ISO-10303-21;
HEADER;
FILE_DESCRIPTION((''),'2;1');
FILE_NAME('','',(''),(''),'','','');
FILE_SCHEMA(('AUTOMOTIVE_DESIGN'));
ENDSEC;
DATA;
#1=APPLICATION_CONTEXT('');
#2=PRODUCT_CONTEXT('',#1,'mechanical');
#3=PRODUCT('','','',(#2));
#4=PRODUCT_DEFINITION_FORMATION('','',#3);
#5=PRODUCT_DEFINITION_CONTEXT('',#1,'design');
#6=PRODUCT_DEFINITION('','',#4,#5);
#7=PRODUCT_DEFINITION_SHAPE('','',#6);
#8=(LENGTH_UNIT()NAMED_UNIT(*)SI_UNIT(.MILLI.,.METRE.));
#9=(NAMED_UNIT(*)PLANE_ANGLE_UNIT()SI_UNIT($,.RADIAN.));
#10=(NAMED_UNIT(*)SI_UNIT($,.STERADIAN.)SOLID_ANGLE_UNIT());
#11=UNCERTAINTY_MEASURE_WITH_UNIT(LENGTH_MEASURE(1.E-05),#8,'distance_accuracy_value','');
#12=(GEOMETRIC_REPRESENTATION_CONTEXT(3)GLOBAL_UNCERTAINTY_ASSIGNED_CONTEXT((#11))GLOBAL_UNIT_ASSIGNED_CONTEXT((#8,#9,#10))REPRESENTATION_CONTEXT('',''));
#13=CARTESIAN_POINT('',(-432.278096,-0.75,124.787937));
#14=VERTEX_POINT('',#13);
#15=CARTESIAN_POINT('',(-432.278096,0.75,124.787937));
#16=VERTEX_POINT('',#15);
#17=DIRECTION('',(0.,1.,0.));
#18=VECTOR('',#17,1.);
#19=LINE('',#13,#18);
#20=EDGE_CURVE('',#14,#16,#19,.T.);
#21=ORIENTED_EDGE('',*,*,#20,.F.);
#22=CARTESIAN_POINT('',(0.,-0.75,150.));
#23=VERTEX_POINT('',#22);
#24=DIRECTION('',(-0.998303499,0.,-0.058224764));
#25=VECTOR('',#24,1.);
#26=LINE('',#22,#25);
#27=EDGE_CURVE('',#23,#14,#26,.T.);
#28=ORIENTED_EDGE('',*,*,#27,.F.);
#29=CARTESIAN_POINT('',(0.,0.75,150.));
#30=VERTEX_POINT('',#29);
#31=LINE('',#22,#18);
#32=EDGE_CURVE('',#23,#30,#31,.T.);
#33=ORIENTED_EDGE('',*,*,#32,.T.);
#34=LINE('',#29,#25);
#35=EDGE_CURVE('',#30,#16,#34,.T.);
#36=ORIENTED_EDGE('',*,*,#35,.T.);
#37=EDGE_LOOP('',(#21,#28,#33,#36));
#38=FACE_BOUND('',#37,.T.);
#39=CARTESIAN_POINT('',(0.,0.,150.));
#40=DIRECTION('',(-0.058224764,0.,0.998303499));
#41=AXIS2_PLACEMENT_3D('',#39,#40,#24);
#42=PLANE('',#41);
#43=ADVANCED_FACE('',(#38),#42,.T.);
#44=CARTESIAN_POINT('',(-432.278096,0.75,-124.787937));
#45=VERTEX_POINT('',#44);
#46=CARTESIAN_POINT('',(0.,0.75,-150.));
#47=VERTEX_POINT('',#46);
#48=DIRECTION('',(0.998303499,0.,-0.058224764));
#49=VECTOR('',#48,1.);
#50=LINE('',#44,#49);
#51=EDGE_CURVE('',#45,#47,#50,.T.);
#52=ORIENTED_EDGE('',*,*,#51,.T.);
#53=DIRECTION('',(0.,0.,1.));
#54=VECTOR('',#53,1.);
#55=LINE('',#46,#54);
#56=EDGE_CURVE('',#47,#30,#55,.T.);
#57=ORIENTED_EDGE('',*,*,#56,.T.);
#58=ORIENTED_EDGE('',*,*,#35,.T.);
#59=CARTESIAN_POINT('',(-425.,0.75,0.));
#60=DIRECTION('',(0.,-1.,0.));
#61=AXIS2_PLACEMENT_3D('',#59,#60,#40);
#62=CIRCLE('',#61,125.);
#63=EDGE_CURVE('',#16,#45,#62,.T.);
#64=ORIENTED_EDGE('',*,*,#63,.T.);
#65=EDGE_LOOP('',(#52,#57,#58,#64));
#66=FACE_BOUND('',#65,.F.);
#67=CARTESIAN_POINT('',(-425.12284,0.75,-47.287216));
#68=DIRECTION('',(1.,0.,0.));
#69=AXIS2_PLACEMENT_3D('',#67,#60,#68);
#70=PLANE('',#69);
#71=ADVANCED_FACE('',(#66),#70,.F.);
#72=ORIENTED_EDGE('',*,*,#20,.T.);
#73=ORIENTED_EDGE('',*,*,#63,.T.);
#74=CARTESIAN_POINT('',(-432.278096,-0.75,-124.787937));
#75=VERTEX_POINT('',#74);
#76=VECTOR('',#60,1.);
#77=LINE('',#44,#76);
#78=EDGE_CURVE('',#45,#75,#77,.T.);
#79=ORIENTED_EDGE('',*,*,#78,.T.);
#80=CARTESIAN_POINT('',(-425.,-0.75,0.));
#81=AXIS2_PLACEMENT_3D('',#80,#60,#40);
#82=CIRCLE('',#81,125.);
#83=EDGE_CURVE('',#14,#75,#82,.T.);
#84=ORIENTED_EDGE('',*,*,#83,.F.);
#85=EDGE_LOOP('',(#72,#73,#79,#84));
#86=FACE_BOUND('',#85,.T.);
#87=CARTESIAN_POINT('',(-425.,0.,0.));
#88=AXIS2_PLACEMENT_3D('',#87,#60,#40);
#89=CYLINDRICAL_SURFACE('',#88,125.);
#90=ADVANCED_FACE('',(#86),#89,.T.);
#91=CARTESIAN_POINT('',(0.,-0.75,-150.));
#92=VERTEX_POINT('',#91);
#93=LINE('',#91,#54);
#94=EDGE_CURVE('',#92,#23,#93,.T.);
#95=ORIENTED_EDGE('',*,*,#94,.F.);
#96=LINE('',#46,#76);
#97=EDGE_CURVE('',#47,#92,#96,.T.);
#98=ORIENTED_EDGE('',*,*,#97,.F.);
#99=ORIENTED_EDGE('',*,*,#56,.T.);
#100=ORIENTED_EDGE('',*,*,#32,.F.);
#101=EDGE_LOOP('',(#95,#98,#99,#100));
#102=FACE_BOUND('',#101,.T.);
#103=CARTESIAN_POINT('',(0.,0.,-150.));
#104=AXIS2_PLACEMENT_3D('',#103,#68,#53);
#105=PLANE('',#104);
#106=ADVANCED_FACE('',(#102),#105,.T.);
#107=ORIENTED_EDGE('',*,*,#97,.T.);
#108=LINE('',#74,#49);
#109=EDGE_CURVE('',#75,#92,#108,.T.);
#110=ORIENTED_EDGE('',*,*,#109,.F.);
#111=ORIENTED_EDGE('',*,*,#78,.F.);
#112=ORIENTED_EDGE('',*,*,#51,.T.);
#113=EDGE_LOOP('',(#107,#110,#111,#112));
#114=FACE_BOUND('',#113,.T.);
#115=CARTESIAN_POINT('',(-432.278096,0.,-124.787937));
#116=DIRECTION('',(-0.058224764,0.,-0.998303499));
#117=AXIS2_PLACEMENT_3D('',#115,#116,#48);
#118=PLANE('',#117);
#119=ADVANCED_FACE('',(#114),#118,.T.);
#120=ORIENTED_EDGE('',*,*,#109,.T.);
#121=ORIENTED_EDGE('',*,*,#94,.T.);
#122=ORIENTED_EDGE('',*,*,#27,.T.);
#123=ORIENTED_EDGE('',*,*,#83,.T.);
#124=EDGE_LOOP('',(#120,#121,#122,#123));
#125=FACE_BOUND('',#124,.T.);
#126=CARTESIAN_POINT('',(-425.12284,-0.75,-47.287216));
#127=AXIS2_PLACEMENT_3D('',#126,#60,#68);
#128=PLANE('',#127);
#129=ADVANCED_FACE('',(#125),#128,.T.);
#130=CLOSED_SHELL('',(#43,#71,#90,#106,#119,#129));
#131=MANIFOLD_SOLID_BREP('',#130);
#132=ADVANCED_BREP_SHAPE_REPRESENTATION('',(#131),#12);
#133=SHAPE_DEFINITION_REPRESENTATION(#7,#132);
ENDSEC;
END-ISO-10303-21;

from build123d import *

# Parameters (mm, degrees)
F1_DEPTH = 0.75


# Not quite as in the source:
# - a feature names something its author has since deleted; it is built from what else it names


with BuildPart() as f1:
    # F0 (on Front) → F1 (new body, symmetric)
    with BuildSketch(Plane.XZ):
        with BuildLine():
            ThreePointArc((-432.2780955593, -124.787937418), (-339.223435441, -90.9251393865), (-300, 0))
            Line((-300, 0), (-550, 0))
            ThreePointArc((-550, 0), (-515.9251393865, -85.776564559), (-432.2780955593, -124.787937418))
        make_face()
        with BuildLine():
            Line((-550, 0), (-300, 0))
            ThreePointArc((-300, 0), (-339.223435441, 90.9251393865), (-432.2780955593, 124.787937418))
            ThreePointArc((-432.2780955593, 124.787937418), (-515.9251393865, 85.776564559), (-550, 0))
        make_face()
        with BuildLine():
            Line((0, 0), (-300, 0))
            ThreePointArc((-300, 0), (-339.223435441, -90.9251393865), (-432.2780955593, -124.787937418))
            Line((-432.2780955593, -124.787937418), (0, -150))
            Line((0, -150), (0, 0))
        make_face()
        with BuildLine():
            ThreePointArc((-432.2780955593, 124.787937418), (-339.223435441, 90.9251393865), (-300, 0))
            Line((-300, 0), (0, 0))
            Line((0, 0), (0, 150))
            Line((0, 150), (-432.2780955593, 124.787937418))
        make_face()
    extrude(amount=F1_DEPTH, both=True)


solid = f1.part
